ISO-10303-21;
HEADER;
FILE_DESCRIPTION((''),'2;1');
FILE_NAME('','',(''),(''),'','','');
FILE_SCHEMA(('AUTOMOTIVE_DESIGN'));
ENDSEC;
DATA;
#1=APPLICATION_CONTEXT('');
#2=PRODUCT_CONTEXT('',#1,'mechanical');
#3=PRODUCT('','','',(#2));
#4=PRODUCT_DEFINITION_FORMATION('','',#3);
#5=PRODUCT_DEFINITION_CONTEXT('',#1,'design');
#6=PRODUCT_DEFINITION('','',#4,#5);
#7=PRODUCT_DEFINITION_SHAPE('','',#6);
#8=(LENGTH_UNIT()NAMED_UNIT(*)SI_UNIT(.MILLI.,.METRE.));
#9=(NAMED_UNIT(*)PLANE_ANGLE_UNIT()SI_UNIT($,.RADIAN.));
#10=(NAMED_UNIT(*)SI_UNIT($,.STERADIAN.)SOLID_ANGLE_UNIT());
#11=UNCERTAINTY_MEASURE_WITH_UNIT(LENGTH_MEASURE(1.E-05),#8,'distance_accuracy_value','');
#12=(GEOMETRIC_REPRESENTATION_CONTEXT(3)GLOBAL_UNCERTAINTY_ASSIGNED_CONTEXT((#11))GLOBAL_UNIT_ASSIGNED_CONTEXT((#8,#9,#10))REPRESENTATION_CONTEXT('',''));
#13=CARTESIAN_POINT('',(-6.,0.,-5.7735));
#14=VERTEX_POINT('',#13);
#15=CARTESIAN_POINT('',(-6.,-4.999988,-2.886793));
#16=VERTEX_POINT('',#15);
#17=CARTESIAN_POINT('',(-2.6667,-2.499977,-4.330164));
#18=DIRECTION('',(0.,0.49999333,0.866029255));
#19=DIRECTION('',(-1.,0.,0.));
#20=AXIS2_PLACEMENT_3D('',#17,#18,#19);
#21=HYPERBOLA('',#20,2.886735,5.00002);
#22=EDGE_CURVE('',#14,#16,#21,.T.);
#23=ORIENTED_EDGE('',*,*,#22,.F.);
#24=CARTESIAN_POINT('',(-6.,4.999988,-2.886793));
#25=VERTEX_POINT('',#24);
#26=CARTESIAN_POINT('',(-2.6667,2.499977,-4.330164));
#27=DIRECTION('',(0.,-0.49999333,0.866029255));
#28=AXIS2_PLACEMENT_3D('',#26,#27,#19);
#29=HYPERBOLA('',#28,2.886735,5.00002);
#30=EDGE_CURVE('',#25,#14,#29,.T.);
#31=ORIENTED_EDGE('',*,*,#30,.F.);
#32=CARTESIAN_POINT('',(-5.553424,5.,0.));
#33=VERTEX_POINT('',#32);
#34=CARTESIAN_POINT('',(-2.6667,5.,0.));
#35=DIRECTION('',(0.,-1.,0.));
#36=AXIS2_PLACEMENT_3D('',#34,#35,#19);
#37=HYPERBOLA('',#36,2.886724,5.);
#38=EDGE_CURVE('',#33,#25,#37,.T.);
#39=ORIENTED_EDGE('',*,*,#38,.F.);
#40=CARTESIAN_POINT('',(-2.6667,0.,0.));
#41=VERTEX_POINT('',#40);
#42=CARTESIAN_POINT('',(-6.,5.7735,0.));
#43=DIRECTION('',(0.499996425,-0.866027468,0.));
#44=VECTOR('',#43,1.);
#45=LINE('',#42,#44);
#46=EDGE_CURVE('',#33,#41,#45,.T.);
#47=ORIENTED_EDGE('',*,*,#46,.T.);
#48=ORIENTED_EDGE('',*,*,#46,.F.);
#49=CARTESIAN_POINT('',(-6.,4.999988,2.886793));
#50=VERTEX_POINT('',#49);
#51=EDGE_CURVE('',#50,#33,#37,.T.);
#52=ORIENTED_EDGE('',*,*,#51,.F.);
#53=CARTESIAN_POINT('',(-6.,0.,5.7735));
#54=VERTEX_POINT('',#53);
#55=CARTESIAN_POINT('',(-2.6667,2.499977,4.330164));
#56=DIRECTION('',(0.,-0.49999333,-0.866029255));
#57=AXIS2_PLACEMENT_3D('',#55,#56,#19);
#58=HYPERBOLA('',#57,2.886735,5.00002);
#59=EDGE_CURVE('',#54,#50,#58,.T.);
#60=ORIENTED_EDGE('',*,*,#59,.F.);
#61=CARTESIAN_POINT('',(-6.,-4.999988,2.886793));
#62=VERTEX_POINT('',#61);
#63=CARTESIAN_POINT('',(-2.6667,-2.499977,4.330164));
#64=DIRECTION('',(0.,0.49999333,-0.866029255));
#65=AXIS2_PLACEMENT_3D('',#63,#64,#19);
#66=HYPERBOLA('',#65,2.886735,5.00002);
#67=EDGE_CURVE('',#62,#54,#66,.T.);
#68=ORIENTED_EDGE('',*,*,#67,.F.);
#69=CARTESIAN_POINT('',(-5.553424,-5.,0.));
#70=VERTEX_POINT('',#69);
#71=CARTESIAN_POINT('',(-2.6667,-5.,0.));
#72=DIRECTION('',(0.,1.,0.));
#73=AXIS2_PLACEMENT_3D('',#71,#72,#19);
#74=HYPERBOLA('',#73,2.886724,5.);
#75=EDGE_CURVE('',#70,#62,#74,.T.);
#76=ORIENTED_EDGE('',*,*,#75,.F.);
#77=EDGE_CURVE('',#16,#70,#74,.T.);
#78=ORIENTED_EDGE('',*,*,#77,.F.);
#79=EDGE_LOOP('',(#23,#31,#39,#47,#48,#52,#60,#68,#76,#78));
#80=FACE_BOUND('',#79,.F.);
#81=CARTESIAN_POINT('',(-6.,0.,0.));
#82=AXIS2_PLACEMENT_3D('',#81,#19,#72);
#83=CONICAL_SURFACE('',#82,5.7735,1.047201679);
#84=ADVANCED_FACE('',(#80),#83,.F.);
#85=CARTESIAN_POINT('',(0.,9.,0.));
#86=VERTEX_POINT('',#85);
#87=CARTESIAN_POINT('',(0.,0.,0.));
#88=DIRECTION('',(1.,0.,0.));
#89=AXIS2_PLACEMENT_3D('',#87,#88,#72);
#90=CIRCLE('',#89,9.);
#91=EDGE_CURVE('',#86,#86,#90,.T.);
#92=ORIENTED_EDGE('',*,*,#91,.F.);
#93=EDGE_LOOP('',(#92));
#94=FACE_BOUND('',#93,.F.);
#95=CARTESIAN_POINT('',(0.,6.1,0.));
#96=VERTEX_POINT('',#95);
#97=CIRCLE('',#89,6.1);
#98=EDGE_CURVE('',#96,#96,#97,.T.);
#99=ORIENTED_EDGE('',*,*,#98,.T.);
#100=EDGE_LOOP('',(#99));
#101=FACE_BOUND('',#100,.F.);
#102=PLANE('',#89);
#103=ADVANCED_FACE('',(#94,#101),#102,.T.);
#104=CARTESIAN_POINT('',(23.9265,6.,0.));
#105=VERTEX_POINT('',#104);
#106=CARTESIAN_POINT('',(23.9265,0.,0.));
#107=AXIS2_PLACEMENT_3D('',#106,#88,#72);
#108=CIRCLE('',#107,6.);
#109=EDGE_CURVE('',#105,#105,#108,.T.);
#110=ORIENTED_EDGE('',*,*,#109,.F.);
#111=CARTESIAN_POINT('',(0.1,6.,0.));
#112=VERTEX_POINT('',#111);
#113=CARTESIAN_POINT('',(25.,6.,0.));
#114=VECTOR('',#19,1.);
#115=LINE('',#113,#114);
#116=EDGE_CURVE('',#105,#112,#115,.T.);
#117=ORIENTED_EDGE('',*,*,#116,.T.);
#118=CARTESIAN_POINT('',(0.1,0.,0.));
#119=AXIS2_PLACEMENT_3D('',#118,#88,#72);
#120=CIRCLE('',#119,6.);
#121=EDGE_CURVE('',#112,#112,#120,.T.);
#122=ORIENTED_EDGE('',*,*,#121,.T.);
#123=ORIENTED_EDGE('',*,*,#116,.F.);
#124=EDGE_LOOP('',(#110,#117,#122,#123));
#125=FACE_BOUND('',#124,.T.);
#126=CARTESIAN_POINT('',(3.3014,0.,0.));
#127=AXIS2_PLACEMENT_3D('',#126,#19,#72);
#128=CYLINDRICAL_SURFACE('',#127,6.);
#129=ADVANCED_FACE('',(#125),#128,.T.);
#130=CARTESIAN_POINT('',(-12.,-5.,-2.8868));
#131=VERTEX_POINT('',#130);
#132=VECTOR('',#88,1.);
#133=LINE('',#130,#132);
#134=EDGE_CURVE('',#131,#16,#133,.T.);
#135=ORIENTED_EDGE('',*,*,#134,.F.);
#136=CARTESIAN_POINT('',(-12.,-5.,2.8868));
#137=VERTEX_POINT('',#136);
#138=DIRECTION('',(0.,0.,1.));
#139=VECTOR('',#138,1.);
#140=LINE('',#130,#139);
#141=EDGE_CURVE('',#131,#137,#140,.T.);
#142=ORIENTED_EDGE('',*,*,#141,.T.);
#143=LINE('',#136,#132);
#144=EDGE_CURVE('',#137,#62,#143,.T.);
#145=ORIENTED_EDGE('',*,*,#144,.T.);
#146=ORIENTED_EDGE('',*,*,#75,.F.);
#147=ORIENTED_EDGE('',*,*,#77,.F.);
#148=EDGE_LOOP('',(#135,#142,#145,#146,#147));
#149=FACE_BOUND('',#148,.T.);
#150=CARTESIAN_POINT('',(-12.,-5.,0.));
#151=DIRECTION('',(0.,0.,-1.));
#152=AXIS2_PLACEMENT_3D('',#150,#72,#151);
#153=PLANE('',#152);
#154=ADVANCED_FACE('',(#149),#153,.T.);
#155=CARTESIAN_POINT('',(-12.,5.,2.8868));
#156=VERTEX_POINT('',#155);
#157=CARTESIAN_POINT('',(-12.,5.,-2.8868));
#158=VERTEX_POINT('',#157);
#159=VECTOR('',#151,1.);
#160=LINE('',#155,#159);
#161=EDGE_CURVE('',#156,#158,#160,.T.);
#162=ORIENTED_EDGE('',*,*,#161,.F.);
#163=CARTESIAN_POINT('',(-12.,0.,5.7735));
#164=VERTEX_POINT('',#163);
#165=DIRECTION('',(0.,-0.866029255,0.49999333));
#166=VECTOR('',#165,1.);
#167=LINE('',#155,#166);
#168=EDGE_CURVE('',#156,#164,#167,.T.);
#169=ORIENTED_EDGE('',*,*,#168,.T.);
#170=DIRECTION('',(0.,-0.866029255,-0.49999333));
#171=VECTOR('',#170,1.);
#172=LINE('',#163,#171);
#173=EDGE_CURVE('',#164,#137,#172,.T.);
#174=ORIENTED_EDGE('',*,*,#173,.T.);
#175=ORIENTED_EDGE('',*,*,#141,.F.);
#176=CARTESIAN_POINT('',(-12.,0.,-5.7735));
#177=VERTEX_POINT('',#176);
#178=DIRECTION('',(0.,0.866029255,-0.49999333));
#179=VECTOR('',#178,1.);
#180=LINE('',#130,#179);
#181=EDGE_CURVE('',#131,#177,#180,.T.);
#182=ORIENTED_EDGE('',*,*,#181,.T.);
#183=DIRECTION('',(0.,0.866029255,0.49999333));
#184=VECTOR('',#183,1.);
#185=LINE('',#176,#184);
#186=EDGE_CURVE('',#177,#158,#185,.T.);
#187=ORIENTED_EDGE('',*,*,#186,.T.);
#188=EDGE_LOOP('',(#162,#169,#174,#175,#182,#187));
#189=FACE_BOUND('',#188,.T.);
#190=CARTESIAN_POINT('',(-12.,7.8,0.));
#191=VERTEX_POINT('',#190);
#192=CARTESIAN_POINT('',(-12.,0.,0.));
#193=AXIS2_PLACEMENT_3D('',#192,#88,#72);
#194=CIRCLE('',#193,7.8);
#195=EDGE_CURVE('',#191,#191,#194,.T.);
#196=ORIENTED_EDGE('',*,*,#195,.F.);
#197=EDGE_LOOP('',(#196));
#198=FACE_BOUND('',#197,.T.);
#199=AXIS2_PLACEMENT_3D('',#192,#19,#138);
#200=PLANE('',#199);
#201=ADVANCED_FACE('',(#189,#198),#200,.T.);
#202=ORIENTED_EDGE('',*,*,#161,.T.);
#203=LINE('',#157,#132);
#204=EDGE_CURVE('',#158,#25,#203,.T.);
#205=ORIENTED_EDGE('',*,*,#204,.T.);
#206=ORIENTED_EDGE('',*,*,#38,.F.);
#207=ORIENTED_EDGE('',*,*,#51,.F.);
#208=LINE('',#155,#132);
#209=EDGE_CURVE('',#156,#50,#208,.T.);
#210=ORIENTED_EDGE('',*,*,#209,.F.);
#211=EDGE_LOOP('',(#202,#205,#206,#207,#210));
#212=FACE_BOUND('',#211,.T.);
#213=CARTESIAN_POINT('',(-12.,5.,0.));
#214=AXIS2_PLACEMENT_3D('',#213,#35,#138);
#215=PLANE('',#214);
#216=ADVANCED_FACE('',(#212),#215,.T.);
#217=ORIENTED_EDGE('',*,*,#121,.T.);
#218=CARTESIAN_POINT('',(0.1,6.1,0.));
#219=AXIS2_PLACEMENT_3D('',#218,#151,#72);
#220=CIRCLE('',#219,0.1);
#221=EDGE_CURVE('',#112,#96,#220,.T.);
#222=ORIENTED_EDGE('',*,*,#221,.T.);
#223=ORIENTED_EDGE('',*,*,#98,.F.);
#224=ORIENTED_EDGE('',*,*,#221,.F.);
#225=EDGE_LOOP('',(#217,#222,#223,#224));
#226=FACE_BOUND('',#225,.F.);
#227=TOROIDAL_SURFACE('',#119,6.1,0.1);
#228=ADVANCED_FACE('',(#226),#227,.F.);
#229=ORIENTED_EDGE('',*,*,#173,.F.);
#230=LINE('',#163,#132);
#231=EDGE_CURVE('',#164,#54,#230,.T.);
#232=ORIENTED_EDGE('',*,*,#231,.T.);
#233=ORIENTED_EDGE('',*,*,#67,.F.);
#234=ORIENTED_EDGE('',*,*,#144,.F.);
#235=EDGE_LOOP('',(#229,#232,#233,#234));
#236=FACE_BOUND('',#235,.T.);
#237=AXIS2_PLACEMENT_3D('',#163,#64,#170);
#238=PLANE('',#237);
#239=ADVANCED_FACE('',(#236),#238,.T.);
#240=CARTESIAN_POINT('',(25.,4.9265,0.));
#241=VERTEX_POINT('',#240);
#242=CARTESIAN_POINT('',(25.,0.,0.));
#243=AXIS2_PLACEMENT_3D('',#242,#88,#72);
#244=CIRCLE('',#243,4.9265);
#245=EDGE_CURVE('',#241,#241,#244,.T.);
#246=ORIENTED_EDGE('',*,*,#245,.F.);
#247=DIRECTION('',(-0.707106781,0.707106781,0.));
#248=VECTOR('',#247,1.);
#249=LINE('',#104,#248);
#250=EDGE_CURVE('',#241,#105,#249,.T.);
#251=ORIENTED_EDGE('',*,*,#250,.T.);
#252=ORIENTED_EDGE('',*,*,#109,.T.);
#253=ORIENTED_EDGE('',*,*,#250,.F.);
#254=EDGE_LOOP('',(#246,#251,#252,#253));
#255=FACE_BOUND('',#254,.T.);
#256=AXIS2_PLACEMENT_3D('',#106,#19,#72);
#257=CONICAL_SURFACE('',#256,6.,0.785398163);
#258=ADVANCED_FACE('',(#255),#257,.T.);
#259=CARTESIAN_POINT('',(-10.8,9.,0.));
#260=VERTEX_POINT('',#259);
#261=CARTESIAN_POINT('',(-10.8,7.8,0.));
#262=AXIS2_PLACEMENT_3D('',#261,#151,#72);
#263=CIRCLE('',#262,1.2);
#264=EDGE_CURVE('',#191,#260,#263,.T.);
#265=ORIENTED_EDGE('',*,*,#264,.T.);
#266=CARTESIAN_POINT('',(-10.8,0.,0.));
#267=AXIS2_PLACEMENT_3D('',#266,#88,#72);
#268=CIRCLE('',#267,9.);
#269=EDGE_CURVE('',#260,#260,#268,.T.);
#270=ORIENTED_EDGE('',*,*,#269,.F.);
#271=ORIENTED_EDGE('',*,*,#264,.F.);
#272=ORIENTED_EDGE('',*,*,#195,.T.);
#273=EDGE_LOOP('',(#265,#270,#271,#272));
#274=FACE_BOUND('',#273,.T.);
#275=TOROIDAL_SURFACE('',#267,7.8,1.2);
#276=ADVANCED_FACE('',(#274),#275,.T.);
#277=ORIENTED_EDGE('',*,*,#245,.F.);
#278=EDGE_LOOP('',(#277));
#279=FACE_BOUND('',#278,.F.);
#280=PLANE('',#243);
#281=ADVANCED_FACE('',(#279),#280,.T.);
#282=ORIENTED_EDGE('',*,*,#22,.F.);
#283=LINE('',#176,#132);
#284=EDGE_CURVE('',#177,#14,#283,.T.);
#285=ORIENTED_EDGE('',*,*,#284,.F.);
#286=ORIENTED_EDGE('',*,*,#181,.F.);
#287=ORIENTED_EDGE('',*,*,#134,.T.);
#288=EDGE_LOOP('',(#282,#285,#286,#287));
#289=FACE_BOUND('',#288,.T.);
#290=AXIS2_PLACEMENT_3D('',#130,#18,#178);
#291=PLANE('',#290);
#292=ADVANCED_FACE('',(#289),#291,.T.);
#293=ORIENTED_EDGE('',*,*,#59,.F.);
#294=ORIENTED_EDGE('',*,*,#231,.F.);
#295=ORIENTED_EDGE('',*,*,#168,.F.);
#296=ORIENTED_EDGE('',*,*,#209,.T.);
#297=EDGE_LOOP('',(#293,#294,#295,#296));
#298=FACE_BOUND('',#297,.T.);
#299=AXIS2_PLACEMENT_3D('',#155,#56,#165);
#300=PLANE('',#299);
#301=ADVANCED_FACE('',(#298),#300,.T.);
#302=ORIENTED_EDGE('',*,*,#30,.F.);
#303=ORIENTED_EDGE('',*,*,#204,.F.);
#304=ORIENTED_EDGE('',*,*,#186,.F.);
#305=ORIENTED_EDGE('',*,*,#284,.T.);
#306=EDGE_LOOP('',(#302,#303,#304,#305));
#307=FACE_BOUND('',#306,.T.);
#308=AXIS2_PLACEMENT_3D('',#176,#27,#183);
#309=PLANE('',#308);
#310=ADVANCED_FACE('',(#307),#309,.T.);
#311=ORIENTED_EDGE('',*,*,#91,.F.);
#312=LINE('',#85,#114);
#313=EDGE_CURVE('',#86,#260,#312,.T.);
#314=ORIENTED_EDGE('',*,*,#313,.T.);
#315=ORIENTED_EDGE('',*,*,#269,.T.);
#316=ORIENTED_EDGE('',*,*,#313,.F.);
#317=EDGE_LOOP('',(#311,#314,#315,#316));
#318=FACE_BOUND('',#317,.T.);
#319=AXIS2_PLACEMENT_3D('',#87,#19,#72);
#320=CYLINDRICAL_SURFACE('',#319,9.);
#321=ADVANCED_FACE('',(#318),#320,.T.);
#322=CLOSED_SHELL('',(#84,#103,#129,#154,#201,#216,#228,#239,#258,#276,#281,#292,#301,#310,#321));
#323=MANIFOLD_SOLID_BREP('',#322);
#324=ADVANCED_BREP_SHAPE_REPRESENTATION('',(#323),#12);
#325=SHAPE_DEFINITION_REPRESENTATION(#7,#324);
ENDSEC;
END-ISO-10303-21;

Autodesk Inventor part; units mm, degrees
ref_plane "YZ Plane" through (0, 0, 0) normal (1, 0, 0) x (0, 1, 0)
ref_plane "XZ Plane" through (0, 0, 0) normal (0, 1, 0) x (-1, 0, 0)
sketch "Esquisse1" plane through (0, 0, 0) normal (0, 0, 1) x (1, 0, 0)
  line L0 (-2.6667, 0) -> (25, 0)
  line L1 (25, 0) -> (25, 6)
  line L2 (25, 6) -> (4.375, 6)
  line L3 (4.375, 6) -> (3.3014, 6)
  line L4 (3.3014, 6) -> (0, 6)
  line L5 (0, 6) -> (0, 9)
  line L6 (0, 9) -> (-12, 9)
  line L7 (-12, 9) -> (-12, 5.7735)
  line L8 (-12, 5.7735) -> (-6, 5.7735)
  line L9 (-6, 5.7735) -> (-2.6667, 0)
  line L10 (-19.4, 0) -> (32.4, 0) projected
  line L11 (0, -1.8) -> (0, 10.8) projected
  line L12 (4.375, 6) -> (0, 6) construction
  dimension "d1" = 20.625
  dimension "d2" = 1.0736
  dimension "d3" = 12
  dimension "d4" = 6
  dimension "d5" = 60
  dimension "d6" = 12
  dimension "d7" = 12
  dimension "d8" = 11.547
  dimension "d9" = 18
  dimension "d26" = 25
revolve "Corps" add sketch "Esquisse1" angle 360 about axis through (-2.6667, 0, 0) along (1, 0, 0)
sketch "Esquisse2" plane through (-12, 0, 0) normal (-1, 0, 0) x (0, 0, 1)
  circle A0 centre (0, 0) radius 5.7735 projected
  line L0 (0, -12.6) -> (0, 12.6) projected
  line L1 (-12.6, 0) -> (12.6, 0) projected
  line L2 (5.7735, 0) -> (2.8868, -5)
  line L3 (2.8868, -5) -> (-2.8868, -5)
  line L4 (-2.8868, -5) -> (-5.7735, 0)
  line L5 (-5.7735, 0) -> (-2.8868, 5)
  line L6 (-2.8868, 5) -> (2.8868, 5)
  line L7 (2.8868, 5) -> (5.7735, 0)
extrude "Rainure" add sketch "Esquisse2" against normal up to next contours L7 A0 | A0 L2 | L6 L0 A0 | A0 L0 L3 | L0 L6 A0 | A0 L3 L0 | L4 A0 | A0 L5
fillet "Congé1" radius 1.2 1 edges at (-12, -9, 0)
thread "Filetage" size "M12x1.75" class "6g" standard "ISO Metric profile" length 20.625
chamfer "Chanfrein1" distance 1.0735 distance2 1.0735 1 edges at (25, -6, 0) measured on face at (25, -3.0269, -1.5886)
ref_plane "Work Plane1" through (29, 0, 0) normal (0, -1, 0) x (1, 0, 0)
fillet "Fillet2" radius 0.1 1 edges at (0, -6, 0)
equation "\"d30\" = R"
equation "\"d17\" = RR"
equation "\"d13\" = GEL"
equation "\"d15\" = -0.5 * SPD + 0.5 * GD"
equation "\"d16\" = GUL"
equation "\"d1\" = GEL"
equation "\"d3\" = KOH"
equation "\"d4\" = INTI"
equation "\"d6\" = GD"
equation "\"d7\" = BDM"
equation "\"d8\" = 1.1547 * SW"
equation "\"d9\" = KOD"
equation "\"d26\" = NLG"
equation "\"GD\" = 12"
equation "\"NLG\" = 25"
equation "\"GEL\" = 20.625"
equation "\"KOD\" = 18"
equation "\"KOH\" = 12"
equation "\"INTI\" = 6"
equation "\"GAL\" = 0.61345 * PTC"
equation "\"GUL\" = 0.61345 * PTC"
equation "\"BDM\" = NND"
equation "\"RR\" = 1.2"
equation "\"SPD\" = NND - 1.2269 * PTC"
equation "\"R\" = 0.1"
equation "\"TOA\" = 30deg"
equation "\"GD1\" = THREADDIA - 1.2269 * PTC"
equation "\"THREADDIA\" = 12"
equation "\"FAWI\" = 45deg"
equation "\"PTC\" = 1.75"
equation "\"NND\" = 12"
equation "\"E0\" = 1.155 * SW"
equation "\"SW\" = 10"
properties part number "ISO 4762 - M12 x 25" material "Acier inoxydable 440C"
